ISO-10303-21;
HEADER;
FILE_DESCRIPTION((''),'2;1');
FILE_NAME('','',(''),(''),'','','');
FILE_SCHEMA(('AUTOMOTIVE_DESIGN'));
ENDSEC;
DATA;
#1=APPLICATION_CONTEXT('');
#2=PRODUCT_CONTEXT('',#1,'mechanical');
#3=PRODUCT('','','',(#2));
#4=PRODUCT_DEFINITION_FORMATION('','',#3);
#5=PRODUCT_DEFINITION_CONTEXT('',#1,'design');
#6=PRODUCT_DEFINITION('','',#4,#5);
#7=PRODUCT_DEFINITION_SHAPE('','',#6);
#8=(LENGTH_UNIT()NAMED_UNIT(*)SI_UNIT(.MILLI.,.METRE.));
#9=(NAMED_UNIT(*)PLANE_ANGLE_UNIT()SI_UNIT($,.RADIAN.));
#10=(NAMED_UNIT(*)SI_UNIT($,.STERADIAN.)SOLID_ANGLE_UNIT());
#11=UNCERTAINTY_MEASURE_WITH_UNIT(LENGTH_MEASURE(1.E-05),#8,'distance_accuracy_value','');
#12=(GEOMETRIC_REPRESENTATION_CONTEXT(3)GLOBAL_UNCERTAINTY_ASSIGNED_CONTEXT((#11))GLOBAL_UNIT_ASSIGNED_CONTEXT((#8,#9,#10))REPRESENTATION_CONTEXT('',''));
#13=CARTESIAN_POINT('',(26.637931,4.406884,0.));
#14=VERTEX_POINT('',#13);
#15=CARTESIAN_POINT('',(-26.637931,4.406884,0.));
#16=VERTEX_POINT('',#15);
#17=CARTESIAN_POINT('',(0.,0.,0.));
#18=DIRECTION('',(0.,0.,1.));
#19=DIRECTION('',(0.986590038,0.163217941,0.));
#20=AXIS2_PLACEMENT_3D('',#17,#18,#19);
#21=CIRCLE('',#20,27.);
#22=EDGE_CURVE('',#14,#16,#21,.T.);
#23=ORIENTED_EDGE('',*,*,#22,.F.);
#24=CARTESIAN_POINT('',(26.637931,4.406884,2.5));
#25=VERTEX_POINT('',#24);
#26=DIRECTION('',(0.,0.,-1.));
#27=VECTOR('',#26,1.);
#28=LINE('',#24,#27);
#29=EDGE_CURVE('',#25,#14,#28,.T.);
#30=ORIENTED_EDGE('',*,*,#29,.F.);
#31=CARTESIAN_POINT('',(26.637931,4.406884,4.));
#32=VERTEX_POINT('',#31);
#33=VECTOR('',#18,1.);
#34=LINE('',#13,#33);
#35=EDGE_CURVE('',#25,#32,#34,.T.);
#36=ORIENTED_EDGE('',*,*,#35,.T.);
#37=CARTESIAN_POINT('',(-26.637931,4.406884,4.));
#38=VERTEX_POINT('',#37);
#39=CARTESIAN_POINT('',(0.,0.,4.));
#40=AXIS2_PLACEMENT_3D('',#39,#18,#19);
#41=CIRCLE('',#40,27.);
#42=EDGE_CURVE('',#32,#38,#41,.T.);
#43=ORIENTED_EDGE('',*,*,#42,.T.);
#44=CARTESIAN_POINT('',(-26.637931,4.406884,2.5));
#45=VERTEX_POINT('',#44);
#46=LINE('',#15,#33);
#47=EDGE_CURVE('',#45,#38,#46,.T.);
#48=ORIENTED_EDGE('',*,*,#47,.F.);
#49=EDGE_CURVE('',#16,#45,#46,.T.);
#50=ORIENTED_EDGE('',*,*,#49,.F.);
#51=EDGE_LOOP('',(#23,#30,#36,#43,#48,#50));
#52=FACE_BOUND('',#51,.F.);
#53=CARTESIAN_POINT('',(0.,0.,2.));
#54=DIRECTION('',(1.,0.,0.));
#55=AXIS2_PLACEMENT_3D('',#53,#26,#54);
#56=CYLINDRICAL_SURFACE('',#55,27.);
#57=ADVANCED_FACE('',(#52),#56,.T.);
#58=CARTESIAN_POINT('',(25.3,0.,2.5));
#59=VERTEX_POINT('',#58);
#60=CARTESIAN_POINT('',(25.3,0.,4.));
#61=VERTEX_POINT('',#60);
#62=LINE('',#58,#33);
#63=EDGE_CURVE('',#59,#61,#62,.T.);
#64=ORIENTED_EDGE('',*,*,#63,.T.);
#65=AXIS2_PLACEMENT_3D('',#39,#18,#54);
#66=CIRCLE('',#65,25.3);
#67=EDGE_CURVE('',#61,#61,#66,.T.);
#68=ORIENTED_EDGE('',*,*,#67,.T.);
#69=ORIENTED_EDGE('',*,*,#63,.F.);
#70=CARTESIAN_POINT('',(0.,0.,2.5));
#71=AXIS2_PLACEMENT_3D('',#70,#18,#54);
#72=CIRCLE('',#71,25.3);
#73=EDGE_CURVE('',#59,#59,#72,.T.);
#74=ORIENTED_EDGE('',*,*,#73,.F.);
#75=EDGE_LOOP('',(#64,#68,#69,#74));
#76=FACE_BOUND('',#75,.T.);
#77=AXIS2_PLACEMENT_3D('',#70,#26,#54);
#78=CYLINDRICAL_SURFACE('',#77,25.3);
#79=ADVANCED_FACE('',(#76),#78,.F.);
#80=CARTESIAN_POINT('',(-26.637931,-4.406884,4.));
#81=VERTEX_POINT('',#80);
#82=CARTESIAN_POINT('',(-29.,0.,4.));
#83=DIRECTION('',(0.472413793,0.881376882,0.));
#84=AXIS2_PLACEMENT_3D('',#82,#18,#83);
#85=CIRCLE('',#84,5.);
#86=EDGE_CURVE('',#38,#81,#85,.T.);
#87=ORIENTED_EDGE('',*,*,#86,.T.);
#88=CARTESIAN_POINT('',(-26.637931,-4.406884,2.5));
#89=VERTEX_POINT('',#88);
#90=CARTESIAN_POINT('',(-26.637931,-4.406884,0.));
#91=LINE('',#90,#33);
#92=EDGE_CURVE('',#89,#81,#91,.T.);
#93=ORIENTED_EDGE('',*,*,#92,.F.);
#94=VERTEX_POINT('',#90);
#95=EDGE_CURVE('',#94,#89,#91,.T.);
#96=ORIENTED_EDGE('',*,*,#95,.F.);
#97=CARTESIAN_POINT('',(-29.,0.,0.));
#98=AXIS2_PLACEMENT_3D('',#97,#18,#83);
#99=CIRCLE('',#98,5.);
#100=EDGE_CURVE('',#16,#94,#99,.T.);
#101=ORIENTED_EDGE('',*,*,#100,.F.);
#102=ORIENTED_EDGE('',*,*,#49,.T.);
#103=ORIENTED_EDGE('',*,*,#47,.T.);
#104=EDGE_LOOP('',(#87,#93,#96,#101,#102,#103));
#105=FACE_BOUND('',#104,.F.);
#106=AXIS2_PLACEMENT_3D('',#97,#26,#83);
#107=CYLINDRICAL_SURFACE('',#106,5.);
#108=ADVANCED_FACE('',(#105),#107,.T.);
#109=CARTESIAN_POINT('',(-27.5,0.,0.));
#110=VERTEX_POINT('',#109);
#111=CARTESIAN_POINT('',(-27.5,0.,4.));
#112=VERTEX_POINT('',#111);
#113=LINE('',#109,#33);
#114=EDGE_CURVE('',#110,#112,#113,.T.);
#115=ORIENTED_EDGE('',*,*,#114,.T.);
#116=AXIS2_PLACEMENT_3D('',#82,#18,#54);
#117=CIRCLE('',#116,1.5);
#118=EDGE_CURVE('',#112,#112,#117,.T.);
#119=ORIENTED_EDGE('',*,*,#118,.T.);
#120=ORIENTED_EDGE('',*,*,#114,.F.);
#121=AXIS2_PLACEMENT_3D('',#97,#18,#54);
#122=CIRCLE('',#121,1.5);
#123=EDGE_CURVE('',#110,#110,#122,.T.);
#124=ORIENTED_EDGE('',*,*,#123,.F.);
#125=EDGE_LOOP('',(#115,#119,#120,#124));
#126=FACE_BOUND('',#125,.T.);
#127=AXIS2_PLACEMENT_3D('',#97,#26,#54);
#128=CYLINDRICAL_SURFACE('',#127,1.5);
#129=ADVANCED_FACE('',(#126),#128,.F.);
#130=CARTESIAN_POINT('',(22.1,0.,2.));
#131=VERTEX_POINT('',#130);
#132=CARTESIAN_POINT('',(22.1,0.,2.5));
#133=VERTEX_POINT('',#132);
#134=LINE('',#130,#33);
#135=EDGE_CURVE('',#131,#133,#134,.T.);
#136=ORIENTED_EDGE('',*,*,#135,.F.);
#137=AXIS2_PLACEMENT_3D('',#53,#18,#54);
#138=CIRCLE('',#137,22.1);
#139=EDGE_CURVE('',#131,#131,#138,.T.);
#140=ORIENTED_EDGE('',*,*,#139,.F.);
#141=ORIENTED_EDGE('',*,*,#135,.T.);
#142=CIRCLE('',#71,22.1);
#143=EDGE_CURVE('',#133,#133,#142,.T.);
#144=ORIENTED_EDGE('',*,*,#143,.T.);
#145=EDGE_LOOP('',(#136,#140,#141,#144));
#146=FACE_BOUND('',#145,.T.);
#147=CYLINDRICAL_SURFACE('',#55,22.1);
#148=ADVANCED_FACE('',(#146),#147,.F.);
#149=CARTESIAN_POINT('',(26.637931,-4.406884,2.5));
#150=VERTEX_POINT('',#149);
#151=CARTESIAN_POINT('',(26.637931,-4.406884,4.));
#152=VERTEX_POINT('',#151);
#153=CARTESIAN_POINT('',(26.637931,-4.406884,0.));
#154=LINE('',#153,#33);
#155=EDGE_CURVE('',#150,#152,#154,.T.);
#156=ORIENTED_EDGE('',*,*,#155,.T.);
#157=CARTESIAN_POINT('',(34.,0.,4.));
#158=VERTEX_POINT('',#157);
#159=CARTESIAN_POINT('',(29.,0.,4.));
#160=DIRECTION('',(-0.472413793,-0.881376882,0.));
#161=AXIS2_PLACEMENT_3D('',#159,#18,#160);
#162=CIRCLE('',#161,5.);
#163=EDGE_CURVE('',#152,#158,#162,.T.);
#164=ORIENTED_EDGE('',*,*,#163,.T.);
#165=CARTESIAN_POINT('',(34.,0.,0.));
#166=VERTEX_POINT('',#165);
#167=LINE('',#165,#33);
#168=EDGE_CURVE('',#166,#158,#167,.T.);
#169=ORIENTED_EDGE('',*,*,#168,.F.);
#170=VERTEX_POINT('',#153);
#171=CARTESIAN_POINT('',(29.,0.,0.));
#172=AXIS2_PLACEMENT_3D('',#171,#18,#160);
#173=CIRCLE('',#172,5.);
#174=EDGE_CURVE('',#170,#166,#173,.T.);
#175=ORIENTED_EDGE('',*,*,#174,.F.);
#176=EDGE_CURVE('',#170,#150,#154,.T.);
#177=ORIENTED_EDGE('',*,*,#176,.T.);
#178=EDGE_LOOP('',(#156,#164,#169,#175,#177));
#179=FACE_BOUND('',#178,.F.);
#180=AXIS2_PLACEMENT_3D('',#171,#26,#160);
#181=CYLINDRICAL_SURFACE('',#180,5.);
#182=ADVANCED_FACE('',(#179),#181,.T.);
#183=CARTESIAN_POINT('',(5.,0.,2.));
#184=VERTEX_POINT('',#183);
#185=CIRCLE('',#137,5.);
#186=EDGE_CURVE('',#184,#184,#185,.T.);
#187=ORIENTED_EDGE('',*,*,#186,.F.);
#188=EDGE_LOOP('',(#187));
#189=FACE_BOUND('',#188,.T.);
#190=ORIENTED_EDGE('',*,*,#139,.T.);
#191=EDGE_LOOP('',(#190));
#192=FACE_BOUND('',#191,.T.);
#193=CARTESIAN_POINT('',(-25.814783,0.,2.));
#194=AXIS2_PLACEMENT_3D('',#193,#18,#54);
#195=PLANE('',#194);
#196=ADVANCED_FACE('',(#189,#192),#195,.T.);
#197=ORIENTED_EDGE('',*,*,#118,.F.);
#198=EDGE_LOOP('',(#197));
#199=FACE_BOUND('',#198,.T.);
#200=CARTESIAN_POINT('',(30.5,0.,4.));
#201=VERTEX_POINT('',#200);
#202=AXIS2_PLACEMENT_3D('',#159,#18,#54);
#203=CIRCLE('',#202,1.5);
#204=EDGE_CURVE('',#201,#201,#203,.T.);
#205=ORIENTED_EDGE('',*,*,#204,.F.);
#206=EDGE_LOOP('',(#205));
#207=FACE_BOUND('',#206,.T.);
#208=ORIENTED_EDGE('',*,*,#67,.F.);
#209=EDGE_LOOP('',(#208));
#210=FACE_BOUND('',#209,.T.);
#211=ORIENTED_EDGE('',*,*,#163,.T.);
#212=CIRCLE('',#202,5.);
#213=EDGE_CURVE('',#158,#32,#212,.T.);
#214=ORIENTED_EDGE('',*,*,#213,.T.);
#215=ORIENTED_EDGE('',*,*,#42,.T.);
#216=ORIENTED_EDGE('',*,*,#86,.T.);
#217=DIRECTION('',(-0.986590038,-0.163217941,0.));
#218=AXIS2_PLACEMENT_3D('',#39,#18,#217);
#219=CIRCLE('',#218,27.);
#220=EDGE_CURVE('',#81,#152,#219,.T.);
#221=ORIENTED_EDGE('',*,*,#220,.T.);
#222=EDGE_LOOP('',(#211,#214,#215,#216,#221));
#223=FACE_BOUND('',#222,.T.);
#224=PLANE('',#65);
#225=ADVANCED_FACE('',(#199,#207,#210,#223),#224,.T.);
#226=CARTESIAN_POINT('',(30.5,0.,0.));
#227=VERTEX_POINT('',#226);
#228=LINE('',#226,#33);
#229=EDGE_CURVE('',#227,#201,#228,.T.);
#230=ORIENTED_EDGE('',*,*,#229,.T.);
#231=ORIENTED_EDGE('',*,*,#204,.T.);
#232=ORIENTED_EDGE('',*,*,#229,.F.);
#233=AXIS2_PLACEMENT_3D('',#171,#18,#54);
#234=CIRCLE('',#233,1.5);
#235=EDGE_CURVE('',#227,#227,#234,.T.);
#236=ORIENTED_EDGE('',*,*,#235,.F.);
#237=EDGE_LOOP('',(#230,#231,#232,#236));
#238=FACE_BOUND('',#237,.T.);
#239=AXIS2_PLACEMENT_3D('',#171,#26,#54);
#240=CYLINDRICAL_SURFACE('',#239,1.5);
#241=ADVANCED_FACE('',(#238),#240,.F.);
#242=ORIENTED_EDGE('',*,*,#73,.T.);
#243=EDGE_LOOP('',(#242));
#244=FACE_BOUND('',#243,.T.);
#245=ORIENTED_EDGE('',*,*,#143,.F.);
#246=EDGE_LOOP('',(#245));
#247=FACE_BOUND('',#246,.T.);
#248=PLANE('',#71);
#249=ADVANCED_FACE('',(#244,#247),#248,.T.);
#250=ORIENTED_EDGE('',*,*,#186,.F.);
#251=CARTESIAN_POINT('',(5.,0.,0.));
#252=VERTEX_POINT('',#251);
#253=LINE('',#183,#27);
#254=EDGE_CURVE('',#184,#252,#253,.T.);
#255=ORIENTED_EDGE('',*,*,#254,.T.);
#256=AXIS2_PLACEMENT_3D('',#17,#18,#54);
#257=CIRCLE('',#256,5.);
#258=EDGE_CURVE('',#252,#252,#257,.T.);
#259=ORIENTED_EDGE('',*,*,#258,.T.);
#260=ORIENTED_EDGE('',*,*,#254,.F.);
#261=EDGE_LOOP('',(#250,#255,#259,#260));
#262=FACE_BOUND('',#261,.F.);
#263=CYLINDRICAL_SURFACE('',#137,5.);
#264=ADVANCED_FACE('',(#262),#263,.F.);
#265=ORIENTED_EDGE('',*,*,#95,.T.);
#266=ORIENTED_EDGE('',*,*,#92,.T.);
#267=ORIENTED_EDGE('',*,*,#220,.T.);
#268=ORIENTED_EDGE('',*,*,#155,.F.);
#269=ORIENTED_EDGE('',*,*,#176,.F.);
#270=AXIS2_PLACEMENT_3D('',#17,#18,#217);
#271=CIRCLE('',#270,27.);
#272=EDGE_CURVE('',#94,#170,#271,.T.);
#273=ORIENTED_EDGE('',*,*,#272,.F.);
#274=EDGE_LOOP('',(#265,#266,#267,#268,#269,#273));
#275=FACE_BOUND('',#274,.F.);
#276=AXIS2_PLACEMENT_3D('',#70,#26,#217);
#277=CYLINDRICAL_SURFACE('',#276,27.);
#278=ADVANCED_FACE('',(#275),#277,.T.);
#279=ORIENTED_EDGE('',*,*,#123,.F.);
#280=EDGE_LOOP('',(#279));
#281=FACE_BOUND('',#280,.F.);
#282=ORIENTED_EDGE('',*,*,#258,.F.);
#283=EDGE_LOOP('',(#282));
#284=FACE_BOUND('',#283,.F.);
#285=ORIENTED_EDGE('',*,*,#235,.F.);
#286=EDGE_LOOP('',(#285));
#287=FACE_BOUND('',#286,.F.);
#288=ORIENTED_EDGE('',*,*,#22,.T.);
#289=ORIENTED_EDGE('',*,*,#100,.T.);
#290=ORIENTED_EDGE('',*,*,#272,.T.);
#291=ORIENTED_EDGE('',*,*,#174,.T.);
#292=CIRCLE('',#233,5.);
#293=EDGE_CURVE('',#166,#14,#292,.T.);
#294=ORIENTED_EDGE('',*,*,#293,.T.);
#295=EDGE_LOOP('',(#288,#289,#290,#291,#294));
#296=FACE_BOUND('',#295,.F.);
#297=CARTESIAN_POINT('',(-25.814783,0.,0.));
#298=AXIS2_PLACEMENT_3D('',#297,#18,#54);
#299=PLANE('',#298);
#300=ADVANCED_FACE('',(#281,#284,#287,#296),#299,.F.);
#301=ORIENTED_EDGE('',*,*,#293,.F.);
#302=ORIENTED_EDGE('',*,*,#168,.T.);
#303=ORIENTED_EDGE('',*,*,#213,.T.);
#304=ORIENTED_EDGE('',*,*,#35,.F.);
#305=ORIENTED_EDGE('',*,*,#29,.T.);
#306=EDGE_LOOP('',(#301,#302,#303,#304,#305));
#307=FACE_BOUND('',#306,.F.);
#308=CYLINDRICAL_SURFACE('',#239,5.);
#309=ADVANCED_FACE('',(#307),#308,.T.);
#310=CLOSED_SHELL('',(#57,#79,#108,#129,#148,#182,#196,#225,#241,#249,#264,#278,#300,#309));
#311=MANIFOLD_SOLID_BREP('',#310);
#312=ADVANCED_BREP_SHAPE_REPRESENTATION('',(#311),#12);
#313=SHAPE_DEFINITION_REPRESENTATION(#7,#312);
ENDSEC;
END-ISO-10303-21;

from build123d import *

# Parameters (mm, degrees)
F0_R     = 1.5
F1_DEPTH = 4
F2_DEPTH = 2
F3_R     = 27
F3_R_2   = 22.1
F4_DEPTH = 0.5
F5_R     = 25.3
F6_DEPTH = 1.5
F7_R     = 5
F8_DEPTH = 25


with BuildPart() as f1:
    # F0 (on Top) → F1 (new body)
    with BuildSketch(Plane.XY):
        with BuildLine():
            ThreePointArc((-26.6379310345, -4.4068844099), (-27, 0), (-26.6379310345, 4.4068844099))
            ThreePointArc((-26.6379310345, 4.4068844099), (-34, 0), (-26.6379310345, -4.4068844099))
        make_face()
        with Locations((-29, 0)):
            Circle(F0_R, mode=Mode.SUBTRACT)
    extrude(amount=F1_DEPTH)



with BuildPart() as f1b:
    # F0 (on Top) → F1, piece 2 (new body)
    with BuildSketch(Plane.XY):
        with BuildLine():
            ThreePointArc((26.6379310345, 4.4068844099), (26.9093305187, 2.21086658), (27, 0))
            ThreePointArc((27, 0), (26.9093305187, -2.21086658), (26.6379310345, -4.4068844099))
            ThreePointArc((26.6379310345, -4.4068844099), (31.5680396388, -4.2901249881), (34, 0))
            ThreePointArc((34, 0), (31.5680396388, 4.2901249881), (26.6379310345, 4.4068844099))
        make_face()
        with Locations((29, 0)):
            Circle(F0_R, mode=Mode.SUBTRACT)
    extrude(amount=F1_DEPTH)


with BuildPart() as f2:
    # F0 (on Top) → F2 (new body)
    with BuildSketch(Plane.XY):
        with BuildLine():
            ThreePointArc((-24, 0), (-24.7098750119, 2.5680396388), (-26.6379310345, 4.4068844099))
            ThreePointArc((-26.6379310345, 4.4068844099), (-27, 0), (-26.6379310345, -4.4068844099))
            ThreePointArc((-26.6379310345, -4.4068844099), (-24.7098750119, -2.5680396388), (-24, 0))
        make_face()
        with BuildLine():
            ThreePointArc((26.6379310345, -4.4068844099), (26.9093305187, -2.21086658), (27, 0))
            ThreePointArc((27, 0), (26.9093305187, 2.21086658), (26.6379310345, 4.4068844099))
            ThreePointArc((26.6379310345, 4.4068844099), (24, 0), (26.6379310345, -4.4068844099))
        make_face()
        with BuildLine():
            ThreePointArc((26.6379310345, -4.4068844099), (24, 0), (26.6379310345, 4.4068844099))
            ThreePointArc((26.6379310345, 4.4068844099), (0, 27), (-26.6379310345, 4.4068844099))
            ThreePointArc((-26.6379310345, 4.4068844099), (-24.7098750119, 2.5680396388), (-24, 0))
            ThreePointArc((-24, 0), (-24.7098750119, -2.5680396388), (-26.6379310345, -4.4068844099))
            ThreePointArc((-26.6379310345, -4.4068844099), (0, -27), (26.6379310345, -4.4068844099))
        make_face()
    extrude(amount=F2_DEPTH)


with BuildPart() as f1_1:
    add(f1.part)

    add(f1b.part)  # F4 merges F1b

    add(f2.part)  # F4 merges F2
    # F3 (on face) → F4 (join)
    with BuildSketch(Plane.XY.offset(2)):
        Circle(F3_R)
        Circle(F3_R_2, mode=Mode.SUBTRACT)
    extrude(amount=F4_DEPTH)

    # F5 (on face) → F6 (join)
    with BuildSketch(Plane.XY.offset(2.5)):
        with BuildLine():
            ThreePointArc((26.6379310345, -4.4068844099), (27, 0), (26.6379310345, 4.4068844099))
            ThreePointArc((26.6379310345, 4.4068844099), (0, 27), (-26.6379310345, 4.4068844099))
            ThreePointArc((-26.6379310345, 4.4068844099), (-27, 0), (-26.6379310345, -4.4068844099))
            ThreePointArc((-26.6379310345, -4.4068844099), (0, -27), (26.6379310345, -4.4068844099))
        make_face()
        Circle(F5_R, mode=Mode.SUBTRACT)
    extrude(amount=F6_DEPTH)

    # F7 (on face) → F8 (cut)
    with BuildSketch(Plane.XY.offset(2)):
        Circle(F7_R)
    extrude(amount=-F8_DEPTH, mode=Mode.SUBTRACT)


solid = f1_1.part
